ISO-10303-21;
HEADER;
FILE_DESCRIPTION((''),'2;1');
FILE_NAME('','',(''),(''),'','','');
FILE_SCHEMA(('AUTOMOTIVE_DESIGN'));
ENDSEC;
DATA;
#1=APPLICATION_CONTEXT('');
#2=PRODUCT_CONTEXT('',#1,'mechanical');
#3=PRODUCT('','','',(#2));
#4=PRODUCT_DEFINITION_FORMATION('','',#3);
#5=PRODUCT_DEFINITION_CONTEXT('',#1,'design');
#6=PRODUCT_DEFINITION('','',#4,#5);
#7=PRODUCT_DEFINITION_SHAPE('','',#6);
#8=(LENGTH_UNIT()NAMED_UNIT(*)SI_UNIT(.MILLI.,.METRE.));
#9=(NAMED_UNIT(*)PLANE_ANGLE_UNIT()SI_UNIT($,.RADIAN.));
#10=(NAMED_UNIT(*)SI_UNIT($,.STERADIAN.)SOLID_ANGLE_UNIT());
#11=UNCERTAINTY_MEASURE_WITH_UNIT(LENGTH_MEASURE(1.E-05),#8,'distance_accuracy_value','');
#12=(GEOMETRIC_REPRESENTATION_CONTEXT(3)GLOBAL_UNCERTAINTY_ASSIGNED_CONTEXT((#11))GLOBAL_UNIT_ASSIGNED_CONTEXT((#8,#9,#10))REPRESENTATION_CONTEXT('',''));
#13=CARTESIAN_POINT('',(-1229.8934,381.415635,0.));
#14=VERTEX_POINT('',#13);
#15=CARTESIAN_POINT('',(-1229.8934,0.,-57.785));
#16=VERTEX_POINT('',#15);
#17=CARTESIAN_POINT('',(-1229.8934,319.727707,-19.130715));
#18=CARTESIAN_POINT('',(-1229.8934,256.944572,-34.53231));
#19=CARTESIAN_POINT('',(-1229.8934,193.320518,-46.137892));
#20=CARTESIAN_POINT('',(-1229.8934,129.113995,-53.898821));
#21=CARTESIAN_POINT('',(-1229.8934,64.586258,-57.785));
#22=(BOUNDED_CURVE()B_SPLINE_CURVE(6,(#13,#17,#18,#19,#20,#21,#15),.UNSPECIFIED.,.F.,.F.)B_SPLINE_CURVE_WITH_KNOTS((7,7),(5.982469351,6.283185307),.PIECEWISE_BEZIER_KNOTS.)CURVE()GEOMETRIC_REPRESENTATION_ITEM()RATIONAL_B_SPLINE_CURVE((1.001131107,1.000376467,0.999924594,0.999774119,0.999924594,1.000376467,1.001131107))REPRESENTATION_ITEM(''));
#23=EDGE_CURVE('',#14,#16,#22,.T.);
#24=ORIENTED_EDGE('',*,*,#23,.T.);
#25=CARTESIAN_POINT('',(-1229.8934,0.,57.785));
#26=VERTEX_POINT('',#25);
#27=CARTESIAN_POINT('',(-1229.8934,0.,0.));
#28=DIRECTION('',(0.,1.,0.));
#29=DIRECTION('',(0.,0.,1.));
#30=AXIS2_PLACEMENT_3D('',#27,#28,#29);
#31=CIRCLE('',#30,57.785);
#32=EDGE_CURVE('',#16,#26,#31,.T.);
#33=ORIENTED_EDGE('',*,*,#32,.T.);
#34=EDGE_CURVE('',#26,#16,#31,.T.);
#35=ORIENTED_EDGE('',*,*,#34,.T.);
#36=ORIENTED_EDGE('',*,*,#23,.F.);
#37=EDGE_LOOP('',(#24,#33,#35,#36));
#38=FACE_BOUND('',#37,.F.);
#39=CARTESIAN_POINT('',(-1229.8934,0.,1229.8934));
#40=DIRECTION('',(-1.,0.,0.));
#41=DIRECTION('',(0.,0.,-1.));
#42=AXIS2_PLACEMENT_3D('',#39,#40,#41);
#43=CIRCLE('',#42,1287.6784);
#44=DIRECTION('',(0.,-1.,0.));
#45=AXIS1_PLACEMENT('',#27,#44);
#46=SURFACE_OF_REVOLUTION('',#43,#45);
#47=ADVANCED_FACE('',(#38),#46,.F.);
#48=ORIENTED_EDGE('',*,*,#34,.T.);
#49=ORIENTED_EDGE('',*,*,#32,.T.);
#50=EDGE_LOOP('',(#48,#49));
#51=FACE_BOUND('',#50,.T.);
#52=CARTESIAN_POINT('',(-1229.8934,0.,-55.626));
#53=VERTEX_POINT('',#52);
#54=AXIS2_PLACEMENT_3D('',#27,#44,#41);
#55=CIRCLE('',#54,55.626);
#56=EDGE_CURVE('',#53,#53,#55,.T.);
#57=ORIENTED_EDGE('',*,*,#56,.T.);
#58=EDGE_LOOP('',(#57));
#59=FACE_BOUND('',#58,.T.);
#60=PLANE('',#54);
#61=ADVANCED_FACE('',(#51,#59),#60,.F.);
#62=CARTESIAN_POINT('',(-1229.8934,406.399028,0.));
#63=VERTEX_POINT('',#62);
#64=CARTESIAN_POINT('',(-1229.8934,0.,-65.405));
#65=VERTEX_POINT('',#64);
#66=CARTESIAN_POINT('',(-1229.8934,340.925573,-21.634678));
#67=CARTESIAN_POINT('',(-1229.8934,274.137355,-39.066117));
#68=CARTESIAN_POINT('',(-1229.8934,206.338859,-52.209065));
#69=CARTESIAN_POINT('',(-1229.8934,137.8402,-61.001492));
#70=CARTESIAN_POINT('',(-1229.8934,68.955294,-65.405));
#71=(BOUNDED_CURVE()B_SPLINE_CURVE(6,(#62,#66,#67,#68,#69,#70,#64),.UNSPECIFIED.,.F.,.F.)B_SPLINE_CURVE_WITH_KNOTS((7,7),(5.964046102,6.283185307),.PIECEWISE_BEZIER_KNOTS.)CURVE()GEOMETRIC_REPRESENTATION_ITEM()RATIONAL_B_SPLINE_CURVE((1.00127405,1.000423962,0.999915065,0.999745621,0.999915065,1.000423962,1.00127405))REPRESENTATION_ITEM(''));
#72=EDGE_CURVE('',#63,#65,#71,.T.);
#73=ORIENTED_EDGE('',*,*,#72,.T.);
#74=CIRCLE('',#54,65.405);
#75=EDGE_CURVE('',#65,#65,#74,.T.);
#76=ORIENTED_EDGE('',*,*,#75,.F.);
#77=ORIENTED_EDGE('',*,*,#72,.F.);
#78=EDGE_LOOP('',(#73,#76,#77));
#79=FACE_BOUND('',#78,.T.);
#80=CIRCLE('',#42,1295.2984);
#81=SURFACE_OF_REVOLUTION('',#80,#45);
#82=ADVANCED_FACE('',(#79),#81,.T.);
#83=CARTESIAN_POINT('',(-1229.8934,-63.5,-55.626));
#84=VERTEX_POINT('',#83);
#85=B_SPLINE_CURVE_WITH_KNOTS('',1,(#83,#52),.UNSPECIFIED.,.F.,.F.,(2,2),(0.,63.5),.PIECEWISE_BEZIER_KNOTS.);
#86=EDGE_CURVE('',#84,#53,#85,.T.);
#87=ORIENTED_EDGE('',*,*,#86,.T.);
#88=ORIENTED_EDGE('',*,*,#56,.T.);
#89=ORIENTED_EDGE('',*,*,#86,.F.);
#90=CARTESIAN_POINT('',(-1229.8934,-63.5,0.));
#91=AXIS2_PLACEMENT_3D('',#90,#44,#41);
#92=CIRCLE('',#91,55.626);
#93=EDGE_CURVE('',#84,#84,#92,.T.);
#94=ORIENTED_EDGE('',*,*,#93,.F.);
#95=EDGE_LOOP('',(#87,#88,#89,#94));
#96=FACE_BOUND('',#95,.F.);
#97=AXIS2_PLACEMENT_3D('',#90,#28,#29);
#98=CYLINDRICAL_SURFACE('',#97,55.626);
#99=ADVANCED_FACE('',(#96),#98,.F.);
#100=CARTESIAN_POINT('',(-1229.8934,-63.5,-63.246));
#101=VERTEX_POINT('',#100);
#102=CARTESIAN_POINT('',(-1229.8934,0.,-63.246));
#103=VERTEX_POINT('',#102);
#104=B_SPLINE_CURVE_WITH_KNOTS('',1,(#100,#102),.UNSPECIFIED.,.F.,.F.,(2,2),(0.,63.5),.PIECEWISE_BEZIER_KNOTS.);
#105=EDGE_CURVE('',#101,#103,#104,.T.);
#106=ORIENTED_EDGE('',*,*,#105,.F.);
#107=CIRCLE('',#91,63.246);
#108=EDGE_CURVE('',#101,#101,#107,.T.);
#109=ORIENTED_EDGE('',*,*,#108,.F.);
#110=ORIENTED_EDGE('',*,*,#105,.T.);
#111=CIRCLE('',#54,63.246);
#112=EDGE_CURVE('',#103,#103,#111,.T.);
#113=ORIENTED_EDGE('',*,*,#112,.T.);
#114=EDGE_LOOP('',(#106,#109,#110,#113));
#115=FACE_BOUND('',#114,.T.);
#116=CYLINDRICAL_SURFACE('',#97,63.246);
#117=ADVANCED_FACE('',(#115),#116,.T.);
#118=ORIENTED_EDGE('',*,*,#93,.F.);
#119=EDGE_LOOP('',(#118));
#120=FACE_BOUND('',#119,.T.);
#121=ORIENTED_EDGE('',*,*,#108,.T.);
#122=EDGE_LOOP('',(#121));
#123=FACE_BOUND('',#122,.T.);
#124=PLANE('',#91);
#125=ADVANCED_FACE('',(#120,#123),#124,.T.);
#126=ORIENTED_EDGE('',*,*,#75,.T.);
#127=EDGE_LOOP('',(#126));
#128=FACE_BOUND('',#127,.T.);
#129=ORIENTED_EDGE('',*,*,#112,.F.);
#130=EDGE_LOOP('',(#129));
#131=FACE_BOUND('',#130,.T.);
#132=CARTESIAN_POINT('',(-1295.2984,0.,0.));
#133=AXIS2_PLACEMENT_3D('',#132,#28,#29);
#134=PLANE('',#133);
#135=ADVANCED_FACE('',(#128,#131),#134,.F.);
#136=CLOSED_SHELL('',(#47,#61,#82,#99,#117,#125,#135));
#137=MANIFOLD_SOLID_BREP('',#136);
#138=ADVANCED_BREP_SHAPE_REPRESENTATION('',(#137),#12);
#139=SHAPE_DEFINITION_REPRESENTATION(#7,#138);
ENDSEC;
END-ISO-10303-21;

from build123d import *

# Parameters (mm, degrees)
SKETCH3_R           = 63.246
SKETCH3_R_2         = 55.626
BOSS_EXTRUDE1_DEPTH = 63.5


# Read off the part's stored shape, not the designer's step: Shell1
with BuildPart() as part:
    # Sketch2 → Revolve1 (revolve)
    with BuildSketch(Plane.XY):
        with BuildLine():
            Line((-1295.2984, 0), (-1229.8934, 0))
            Line((-1229.8934, 0), (-1229.8934, 406.399027655))
            ThreePointArc((-1229.8934, 406.399027655), (-1278.842620934, 205.814226734), (-1295.2984, 0))
        make_face()
    revolve(axis=Axis((-1229.8934, 0, 0), (0, 1, 0)))

    # Shell1 outline → Shell1 (revolve, cut)
    with BuildSketch(Plane(origin=(-1229.8934, 0, 0), x_dir=(1, 0, 0), z_dir=(0, 0, 1))):
        with BuildLine():
            add(Edge.make_bspline(
                [(0, 381.415634791), (57.785, 195.085071394), (57.785, 0)],
                knots=[5.982469351, 5.982469351, 5.982469351, 6.283185307, 6.283185307, 6.283185307], degree=2, weights=[1, 0.988717519, 1]))
            Line((0, 381.415634791), (0, -1e-07))
            Line((0, -1e-07), (57.785, 0))
        make_face()
    revolve(axis=Axis((-1229.8934, 0, 0), (0, 1, 0)), mode=Mode.SUBTRACT)

    # Sketch3 → Boss-Extrude1 (add)
    with BuildSketch(Plane.XZ):
        with Locations(Location((-1229.8934, 0, 0), (0, 0, 270))):
            Circle(SKETCH3_R)
        with Locations(Location((-1229.8934, 0, 0), (0, 0, 270))):
            Circle(SKETCH3_R_2, mode=Mode.SUBTRACT)
    extrude(amount=BOSS_EXTRUDE1_DEPTH)


solid = part.part
